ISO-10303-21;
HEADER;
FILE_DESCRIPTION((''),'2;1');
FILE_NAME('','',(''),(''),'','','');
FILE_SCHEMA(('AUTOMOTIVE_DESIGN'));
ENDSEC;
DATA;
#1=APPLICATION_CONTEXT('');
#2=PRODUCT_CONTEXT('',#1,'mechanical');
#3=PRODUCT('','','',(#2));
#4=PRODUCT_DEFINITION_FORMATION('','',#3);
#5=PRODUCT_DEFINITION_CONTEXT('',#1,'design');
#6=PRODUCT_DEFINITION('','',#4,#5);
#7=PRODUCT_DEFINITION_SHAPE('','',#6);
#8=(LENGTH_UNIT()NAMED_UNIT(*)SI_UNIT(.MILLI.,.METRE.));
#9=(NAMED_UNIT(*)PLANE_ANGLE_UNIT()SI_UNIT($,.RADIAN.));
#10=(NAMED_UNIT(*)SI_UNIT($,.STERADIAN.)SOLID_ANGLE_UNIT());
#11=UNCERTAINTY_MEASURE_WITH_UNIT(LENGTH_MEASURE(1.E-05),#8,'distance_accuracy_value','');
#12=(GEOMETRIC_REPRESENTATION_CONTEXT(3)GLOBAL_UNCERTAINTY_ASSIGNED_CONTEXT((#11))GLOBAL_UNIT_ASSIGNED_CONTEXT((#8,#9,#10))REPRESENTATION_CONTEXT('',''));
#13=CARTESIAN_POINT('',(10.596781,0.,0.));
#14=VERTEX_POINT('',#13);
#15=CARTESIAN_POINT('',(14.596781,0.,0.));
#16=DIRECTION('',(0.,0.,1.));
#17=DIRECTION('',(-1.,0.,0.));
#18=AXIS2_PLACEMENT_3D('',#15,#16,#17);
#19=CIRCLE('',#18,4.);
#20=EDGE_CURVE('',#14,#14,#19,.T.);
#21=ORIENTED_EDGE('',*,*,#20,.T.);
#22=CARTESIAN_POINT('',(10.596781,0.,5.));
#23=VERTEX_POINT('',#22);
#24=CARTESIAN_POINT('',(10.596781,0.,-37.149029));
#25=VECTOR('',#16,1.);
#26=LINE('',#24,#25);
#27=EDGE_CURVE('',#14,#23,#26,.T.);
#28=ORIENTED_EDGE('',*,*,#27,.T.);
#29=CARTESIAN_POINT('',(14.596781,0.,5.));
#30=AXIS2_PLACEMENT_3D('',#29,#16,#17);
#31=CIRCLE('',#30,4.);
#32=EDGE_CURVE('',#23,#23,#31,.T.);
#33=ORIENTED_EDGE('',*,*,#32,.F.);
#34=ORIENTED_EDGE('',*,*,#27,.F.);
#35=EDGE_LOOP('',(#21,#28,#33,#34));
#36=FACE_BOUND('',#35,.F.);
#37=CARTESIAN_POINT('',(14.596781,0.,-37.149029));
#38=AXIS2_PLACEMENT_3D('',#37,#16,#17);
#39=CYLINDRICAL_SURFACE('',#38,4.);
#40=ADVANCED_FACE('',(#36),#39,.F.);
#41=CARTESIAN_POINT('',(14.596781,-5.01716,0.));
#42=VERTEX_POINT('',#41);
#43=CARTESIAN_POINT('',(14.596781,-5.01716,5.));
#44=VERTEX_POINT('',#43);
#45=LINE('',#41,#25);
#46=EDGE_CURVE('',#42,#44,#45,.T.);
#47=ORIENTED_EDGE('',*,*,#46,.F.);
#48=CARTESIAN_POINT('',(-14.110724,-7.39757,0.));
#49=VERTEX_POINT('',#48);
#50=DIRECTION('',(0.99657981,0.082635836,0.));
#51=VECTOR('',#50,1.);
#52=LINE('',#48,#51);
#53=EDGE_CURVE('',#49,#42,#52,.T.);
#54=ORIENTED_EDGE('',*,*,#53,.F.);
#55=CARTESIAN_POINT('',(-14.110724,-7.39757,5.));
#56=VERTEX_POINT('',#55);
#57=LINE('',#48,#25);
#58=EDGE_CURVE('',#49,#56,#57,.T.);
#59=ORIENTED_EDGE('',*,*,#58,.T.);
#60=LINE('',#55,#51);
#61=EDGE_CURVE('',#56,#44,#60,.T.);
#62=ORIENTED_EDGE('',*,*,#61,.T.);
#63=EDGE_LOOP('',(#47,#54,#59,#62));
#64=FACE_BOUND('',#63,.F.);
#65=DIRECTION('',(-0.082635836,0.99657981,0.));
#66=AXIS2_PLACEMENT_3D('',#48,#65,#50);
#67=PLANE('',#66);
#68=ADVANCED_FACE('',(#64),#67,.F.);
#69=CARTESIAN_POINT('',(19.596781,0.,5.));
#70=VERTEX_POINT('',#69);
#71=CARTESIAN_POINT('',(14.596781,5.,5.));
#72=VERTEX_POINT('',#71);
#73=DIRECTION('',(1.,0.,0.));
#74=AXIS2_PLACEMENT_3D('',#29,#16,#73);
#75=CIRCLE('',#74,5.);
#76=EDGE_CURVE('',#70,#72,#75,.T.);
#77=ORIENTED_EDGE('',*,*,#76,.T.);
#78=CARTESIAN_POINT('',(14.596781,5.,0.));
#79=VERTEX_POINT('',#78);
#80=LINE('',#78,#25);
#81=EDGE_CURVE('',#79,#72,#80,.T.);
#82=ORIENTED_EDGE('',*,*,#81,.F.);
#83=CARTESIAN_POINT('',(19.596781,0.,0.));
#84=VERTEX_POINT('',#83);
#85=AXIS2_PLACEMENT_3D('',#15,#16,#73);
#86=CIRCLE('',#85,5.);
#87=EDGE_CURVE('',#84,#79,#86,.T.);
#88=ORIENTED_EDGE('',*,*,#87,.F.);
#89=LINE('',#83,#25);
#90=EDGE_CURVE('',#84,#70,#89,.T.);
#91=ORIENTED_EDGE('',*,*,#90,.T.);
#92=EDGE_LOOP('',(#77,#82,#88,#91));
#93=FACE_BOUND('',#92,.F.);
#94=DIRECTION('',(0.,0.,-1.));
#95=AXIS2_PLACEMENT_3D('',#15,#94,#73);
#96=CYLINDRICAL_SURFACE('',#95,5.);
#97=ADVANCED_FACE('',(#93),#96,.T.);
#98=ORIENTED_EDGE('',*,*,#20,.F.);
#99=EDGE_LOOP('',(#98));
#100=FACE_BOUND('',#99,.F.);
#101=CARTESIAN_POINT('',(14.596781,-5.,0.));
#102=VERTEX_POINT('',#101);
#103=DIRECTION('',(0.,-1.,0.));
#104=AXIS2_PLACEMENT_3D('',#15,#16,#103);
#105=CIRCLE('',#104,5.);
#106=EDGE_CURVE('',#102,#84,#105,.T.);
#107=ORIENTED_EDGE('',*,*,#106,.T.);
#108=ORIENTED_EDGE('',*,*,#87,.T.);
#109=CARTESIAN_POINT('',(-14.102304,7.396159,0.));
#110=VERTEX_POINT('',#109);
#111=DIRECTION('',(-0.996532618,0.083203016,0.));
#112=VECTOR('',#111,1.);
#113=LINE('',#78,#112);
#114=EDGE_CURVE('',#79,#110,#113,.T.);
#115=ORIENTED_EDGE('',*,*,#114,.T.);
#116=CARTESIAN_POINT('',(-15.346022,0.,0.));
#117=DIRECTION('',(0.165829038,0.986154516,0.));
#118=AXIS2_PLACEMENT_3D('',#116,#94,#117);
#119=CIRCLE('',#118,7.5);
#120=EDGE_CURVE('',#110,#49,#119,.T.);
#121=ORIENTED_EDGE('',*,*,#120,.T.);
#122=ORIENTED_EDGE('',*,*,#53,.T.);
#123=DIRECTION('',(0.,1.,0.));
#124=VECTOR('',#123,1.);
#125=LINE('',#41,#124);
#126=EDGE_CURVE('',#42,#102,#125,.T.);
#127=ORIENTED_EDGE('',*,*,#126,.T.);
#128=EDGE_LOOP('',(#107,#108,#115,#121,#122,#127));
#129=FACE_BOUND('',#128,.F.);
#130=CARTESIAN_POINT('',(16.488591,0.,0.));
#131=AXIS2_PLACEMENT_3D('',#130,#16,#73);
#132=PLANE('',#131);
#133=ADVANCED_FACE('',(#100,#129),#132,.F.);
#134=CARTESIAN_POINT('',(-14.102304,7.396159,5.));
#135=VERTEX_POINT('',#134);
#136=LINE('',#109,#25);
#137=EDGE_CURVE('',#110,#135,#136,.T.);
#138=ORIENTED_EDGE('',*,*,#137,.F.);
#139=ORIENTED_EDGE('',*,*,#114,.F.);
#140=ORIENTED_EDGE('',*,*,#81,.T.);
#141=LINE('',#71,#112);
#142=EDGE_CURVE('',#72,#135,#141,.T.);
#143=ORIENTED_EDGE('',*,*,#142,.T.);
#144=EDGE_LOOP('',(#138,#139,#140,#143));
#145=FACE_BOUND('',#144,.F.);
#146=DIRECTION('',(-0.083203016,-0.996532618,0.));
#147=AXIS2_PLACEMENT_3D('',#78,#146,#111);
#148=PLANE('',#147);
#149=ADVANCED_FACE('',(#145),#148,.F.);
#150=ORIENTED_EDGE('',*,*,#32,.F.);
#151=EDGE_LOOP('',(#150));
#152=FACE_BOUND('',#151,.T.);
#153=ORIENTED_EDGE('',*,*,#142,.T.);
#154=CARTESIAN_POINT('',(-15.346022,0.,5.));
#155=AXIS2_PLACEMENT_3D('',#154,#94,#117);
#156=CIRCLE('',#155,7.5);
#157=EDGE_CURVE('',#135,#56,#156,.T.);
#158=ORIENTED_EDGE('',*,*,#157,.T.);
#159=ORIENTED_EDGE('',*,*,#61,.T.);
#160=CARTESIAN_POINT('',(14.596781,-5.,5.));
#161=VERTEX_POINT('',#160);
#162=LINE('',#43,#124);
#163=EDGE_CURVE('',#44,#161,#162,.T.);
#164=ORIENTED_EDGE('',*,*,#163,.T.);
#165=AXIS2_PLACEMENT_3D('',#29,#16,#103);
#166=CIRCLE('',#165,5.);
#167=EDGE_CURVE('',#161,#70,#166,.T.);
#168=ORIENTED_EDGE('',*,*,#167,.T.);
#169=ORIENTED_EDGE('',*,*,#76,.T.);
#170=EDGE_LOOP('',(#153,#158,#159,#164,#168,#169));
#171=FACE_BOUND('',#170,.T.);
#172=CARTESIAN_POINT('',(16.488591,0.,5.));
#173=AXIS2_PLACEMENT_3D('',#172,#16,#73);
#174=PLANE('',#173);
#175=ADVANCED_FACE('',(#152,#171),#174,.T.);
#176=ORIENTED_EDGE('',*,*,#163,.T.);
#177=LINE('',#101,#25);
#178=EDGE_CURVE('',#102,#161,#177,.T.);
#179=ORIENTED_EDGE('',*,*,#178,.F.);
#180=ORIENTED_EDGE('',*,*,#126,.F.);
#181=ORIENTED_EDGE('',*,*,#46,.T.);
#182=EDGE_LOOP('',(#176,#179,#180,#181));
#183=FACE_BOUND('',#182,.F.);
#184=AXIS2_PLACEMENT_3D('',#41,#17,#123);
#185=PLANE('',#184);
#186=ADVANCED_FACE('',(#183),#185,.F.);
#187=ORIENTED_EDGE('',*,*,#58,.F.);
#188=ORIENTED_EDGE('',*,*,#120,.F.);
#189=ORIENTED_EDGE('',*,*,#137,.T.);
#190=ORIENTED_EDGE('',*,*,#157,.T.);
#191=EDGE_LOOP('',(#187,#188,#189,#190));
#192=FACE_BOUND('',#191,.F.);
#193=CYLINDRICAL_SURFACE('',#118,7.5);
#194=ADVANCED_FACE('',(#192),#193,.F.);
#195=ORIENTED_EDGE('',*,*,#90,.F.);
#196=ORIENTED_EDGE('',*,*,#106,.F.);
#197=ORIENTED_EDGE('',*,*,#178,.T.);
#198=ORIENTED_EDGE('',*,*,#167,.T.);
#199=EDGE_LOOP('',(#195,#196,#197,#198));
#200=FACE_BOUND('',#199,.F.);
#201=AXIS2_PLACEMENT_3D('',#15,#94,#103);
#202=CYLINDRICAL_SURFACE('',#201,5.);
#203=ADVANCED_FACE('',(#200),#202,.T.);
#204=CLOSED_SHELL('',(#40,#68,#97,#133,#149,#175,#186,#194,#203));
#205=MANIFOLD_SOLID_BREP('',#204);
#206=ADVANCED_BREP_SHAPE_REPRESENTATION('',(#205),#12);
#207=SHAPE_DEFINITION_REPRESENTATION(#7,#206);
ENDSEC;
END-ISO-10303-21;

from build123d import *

# Parameters (mm, degrees)
F1_DEPTH = 5
F3_D     = 8


with BuildPart() as f1:
    # F0 (on Top) → F1 (new body)
    with BuildSketch(Plane.XY):
        with BuildLine():
            ThreePointArc((14.5967810947, -5), (18.1323150007, -3.5355339059), (19.5967810947, 0))
            ThreePointArc((19.5967810947, 0), (18.1323150007, 3.5355339059), (14.5967810947, 5))
            Line((14.5967810947, 5), (14.5967810947, 0))
            Line((14.5967810947, 0), (14.5967810947, -5))
        make_face()
        with BuildLine():
            Line((14.5967810947, 0), (14.5967810947, 5))
            ThreePointArc((14.5967810947, 5), (9.5967810947, 0), (14.5967810947, -5))
            Line((14.5967810947, -5), (14.5967810947, 0))
        make_face()
        with BuildLine():
            ThreePointArc((14.5967810947, -5), (9.5967810947, 0), (14.5967810947, 5))
            Line((14.5967810947, 5), (-14.1023044895, 7.3961588722))
            ThreePointArc((-14.1023044895, 7.3961588722), (-9.6198593647, 4.8436616619), (-7.8460222776, 0))
            ThreePointArc((-7.8460222776, 0), (-9.6226170145, -4.8469198667), (-14.110724196, -7.39756978))
            Line((-14.110724196, -7.39756978), (14.5967810947, -5.0171596368))
            Line((14.5967810947, -5.0171596368), (14.5967810947, -5))
        make_face()
    extrude(amount=F1_DEPTH)

    # F3 (through all)
    with Locations(Plane(origin=(0, 0, 0), x_dir=(1, 0, 0), z_dir=(0, 0, -1))):
        with Locations((14.5967810947, 0)):
            Hole(F3_D / 2)


solid = f1.part
